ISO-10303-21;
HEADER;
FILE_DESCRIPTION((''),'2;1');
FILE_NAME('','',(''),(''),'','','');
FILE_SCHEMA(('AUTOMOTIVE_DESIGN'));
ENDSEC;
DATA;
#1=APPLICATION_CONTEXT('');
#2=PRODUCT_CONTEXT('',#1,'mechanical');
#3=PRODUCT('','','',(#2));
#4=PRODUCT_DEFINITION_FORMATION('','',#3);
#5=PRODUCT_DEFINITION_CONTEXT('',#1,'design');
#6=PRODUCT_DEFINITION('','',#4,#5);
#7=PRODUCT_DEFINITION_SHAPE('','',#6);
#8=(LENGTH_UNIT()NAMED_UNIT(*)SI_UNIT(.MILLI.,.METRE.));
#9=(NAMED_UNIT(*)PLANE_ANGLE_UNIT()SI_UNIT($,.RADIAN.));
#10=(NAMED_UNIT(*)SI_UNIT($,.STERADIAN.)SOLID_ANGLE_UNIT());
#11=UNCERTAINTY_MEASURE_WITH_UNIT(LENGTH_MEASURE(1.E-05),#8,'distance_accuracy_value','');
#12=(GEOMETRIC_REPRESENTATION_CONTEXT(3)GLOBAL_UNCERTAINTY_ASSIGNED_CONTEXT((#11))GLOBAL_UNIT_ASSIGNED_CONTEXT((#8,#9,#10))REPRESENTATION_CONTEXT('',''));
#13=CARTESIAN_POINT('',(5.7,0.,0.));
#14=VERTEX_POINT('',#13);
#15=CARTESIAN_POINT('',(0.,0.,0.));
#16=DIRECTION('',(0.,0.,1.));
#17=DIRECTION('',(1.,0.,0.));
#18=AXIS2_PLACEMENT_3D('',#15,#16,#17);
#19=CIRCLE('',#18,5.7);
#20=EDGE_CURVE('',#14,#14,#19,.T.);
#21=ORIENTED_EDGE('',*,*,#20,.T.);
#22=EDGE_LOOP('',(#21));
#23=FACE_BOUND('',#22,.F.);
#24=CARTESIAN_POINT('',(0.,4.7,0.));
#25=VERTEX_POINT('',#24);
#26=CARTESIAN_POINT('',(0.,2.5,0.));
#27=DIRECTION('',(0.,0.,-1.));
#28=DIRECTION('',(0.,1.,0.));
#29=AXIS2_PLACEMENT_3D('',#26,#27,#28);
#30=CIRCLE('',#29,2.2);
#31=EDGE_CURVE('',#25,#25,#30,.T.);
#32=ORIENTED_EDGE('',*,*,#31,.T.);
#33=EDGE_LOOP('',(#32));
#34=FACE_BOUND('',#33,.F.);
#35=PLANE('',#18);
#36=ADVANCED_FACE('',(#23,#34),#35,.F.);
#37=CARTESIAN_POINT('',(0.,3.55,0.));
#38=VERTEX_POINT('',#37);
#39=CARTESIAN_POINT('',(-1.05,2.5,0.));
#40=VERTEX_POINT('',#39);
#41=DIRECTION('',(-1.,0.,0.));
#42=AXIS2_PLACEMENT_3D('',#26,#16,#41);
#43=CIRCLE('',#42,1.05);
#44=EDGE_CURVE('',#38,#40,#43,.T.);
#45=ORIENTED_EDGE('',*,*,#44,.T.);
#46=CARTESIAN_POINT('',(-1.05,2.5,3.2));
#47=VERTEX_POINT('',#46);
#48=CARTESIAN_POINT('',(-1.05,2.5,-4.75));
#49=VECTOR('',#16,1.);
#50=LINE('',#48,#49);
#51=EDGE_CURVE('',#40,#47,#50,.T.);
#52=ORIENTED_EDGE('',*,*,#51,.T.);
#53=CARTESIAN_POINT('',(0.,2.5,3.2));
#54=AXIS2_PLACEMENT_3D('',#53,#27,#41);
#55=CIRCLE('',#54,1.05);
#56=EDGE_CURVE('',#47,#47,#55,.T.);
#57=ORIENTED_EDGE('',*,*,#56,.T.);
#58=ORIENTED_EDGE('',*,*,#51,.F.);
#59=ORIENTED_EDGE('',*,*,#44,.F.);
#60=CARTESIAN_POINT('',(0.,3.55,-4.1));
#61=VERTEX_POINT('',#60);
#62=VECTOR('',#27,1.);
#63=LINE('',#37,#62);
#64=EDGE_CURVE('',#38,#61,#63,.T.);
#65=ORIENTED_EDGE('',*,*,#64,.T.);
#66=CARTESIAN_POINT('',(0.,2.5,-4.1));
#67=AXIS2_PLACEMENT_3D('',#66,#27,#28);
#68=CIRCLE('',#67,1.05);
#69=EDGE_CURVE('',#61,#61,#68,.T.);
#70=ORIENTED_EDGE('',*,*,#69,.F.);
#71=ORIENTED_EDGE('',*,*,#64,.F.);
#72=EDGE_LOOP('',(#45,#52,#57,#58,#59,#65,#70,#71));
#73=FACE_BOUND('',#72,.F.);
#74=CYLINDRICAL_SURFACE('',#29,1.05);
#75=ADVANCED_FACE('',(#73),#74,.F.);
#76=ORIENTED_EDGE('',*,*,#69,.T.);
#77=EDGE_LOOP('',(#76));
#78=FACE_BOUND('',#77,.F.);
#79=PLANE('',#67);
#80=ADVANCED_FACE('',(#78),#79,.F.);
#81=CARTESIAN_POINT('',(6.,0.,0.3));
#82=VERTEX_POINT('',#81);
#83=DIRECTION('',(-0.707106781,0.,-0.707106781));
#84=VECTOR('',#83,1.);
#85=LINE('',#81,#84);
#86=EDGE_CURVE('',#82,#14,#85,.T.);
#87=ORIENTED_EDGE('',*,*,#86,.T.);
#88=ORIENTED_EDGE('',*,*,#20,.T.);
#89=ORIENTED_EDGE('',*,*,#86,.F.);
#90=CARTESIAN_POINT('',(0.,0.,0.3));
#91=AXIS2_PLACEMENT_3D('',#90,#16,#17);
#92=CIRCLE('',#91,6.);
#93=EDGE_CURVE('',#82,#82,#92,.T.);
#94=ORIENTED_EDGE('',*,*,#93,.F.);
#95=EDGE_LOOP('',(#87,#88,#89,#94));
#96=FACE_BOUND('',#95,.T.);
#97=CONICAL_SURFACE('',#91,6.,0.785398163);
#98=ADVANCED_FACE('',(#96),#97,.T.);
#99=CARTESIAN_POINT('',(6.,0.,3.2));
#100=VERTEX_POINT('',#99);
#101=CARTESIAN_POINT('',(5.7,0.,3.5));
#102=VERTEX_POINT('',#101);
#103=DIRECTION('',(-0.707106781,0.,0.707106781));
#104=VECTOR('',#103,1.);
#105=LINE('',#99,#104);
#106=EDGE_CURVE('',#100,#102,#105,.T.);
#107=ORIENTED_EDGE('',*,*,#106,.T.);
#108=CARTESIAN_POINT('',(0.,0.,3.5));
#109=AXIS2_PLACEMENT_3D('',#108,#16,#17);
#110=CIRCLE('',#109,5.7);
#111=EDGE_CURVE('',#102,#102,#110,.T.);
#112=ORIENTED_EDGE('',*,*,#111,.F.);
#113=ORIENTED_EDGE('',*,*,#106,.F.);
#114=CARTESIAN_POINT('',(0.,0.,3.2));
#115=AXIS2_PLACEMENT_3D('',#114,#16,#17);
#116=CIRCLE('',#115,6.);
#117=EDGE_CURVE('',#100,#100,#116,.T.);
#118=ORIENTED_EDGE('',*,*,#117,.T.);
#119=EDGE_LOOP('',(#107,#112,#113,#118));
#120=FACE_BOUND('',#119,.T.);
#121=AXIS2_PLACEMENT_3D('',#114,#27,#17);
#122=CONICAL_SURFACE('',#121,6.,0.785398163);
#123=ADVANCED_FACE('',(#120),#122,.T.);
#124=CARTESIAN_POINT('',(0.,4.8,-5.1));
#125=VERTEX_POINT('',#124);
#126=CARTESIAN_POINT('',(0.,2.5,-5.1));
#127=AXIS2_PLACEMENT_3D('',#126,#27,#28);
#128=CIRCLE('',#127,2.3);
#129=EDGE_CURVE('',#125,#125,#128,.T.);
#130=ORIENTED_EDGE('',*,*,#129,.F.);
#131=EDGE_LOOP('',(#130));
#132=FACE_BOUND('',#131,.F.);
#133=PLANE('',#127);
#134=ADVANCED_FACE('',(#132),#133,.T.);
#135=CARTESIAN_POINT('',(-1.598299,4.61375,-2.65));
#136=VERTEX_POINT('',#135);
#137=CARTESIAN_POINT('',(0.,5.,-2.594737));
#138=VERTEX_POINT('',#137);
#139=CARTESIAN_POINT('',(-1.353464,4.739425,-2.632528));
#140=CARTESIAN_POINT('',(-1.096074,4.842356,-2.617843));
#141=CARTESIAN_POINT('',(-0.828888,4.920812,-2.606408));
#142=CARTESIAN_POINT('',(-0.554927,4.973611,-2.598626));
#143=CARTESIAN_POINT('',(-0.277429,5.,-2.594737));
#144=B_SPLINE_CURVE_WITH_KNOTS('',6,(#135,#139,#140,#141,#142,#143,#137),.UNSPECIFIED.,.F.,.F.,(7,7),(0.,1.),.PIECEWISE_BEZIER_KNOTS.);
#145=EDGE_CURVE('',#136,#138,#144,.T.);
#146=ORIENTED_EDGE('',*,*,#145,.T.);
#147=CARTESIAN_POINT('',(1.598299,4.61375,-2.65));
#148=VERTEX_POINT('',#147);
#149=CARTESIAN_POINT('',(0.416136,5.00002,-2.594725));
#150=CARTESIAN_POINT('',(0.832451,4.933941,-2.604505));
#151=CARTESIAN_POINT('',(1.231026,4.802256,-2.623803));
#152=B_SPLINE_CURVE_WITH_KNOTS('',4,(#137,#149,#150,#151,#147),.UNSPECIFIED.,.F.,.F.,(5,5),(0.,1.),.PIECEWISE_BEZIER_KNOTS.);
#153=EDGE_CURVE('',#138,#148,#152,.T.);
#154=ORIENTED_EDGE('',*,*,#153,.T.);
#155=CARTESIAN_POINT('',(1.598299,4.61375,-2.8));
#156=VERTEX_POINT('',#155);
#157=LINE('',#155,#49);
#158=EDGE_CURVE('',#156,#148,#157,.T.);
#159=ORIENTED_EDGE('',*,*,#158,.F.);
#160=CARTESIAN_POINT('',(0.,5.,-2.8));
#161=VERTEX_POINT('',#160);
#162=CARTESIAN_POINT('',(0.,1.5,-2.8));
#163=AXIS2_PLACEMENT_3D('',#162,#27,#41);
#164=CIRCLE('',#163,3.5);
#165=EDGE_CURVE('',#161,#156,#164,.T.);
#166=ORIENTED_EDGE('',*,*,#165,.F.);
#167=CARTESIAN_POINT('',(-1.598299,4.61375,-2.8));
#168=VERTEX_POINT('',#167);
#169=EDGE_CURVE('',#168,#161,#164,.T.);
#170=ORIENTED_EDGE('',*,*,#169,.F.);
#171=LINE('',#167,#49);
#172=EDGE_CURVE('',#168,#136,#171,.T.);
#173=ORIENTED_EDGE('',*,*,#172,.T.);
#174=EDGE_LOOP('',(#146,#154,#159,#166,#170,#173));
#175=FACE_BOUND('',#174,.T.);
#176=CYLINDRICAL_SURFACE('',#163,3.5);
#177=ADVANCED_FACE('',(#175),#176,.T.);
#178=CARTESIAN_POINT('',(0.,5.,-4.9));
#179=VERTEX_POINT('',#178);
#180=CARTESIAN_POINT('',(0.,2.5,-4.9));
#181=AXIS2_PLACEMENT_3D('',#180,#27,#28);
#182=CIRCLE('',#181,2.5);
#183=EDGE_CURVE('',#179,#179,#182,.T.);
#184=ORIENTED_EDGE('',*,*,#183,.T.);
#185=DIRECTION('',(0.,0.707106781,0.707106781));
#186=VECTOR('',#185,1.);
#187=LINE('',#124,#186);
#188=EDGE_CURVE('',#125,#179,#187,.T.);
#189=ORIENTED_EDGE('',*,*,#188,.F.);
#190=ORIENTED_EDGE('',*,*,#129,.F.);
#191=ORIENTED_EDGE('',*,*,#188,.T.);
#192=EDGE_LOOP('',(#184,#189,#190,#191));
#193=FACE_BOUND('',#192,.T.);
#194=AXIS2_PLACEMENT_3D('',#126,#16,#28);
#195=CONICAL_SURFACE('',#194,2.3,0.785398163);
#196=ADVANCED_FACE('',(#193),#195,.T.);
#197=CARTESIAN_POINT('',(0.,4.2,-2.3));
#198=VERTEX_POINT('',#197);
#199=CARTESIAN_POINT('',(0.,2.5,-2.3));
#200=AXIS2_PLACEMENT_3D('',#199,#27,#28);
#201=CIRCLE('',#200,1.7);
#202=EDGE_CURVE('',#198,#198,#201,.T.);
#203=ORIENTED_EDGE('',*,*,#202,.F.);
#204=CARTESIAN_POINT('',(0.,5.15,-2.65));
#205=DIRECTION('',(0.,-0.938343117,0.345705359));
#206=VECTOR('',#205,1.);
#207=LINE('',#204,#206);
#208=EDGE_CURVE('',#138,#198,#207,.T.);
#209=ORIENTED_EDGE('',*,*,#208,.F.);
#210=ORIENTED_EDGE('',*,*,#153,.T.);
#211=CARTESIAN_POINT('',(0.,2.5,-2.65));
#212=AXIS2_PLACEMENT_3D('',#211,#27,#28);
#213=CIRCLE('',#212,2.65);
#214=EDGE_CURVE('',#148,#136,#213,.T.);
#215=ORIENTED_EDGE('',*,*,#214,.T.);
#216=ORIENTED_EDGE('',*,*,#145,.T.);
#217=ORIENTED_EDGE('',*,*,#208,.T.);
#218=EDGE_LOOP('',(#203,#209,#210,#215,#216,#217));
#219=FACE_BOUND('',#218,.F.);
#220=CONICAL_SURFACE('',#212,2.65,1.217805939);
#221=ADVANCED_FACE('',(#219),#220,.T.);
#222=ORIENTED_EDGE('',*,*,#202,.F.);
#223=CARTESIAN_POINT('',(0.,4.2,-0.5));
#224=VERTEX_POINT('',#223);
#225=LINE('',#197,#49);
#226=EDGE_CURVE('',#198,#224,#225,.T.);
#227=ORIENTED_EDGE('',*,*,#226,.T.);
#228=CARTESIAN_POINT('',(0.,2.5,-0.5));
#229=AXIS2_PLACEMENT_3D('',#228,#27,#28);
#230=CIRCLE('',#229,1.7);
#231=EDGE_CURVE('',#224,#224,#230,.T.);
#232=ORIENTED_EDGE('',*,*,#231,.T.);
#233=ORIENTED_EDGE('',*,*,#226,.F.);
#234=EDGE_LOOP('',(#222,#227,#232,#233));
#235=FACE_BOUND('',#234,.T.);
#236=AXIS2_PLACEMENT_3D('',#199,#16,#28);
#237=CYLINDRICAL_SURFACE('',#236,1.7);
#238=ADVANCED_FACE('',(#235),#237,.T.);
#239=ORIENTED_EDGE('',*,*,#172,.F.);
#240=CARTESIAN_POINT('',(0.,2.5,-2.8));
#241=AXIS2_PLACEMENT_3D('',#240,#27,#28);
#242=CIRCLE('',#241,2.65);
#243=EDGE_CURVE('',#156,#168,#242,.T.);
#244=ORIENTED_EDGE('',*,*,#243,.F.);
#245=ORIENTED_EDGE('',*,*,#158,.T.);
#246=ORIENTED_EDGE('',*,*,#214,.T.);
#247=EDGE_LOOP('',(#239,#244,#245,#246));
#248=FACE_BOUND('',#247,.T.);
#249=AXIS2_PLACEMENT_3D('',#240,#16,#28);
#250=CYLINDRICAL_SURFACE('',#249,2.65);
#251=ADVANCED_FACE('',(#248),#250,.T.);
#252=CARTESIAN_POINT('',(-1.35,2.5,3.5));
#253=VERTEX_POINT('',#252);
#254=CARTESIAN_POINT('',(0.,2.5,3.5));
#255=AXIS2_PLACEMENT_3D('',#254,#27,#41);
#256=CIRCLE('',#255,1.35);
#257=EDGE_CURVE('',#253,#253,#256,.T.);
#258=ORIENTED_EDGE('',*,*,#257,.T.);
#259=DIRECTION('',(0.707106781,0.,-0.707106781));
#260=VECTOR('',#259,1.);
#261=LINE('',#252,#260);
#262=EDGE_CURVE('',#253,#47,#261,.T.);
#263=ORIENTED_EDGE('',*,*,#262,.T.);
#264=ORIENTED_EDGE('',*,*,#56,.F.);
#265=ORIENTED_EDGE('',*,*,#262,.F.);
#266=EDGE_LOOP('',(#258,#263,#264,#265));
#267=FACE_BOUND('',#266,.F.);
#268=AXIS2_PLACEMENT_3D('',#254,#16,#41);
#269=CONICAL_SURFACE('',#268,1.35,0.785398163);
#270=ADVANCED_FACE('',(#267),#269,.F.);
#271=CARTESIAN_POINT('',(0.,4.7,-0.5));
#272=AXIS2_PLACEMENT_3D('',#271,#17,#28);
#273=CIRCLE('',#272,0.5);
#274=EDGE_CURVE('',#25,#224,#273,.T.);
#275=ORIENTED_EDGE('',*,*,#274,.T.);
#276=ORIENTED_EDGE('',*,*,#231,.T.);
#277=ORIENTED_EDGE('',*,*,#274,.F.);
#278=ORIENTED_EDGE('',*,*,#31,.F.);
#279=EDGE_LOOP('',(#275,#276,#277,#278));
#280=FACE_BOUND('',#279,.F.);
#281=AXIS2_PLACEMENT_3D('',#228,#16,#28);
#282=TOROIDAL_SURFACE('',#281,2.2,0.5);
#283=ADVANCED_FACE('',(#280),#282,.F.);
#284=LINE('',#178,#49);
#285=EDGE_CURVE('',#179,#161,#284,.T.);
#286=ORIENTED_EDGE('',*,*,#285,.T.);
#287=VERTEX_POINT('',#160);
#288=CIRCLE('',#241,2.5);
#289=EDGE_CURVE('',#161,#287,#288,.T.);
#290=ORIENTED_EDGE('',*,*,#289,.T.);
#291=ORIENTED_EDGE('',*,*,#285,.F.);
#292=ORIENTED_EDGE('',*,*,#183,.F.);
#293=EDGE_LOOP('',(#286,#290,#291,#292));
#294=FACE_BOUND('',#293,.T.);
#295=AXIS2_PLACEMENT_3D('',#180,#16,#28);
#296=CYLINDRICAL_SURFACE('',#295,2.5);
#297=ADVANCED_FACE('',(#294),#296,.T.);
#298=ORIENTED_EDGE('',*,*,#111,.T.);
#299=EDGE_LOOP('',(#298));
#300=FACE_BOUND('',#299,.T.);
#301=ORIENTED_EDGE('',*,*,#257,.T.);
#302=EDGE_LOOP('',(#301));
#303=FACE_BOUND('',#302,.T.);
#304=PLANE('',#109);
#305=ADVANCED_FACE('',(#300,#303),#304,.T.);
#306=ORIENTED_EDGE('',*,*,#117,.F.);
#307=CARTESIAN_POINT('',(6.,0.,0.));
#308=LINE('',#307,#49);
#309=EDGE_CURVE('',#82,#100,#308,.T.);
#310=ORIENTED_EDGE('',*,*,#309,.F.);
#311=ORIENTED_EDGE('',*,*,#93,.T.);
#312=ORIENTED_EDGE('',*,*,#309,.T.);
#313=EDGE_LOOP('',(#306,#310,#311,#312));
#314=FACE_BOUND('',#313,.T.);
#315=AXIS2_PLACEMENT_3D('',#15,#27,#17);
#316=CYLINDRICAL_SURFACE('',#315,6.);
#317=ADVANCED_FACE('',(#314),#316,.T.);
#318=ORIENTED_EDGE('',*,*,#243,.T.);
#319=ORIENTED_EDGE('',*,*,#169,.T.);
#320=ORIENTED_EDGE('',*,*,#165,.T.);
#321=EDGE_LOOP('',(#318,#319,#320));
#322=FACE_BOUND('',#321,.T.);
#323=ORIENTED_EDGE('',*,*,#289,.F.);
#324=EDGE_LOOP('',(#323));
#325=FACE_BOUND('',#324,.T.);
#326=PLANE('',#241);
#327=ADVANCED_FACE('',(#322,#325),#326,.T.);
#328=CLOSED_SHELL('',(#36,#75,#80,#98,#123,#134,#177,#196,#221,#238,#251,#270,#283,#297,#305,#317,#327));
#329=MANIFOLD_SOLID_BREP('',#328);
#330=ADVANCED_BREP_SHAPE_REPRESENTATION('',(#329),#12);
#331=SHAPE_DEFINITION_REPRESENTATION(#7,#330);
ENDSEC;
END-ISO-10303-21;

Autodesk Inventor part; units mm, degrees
ref_plane "YZ Plane" through (0, 0, 0) normal (1, 0, 0) x (0, 1, 0)
ref_plane "XZ Plane" through (0, 0, 0) normal (0, 1, 0) x (-1, 0, 0)
ref_plane "XY Plane" through (0, 0, 0) normal (0, 0, 1) x (1, 0, 0)
sketch "Sketch1" plane through (0, 0, 0) normal (0, 0, 1) x (1, 0, 0)
  circle A0 centre (0, 0) radius 6
  dimension "d0" = 12
extrude "Extrusion1" add sketch "Sketch1" along normal blind 3.5
sketch "Sketch2" plane through (0, 0, 3.5) normal (0, 0, 1) x (1, 0, 0)
  circle A0 centre (0, 2.5) radius 1.05
  line L0 (0, 2.5) -> (0, 0) construction
  dimension "d3" = 2.1
  dimension "d4" = 2.5
extrude "Extrusion2" add sketch "Sketch2" along normal blind 15 and the other way blind 8.25
chamfer "Chamfer1" distance 0.3 angle 45 2 edges at (-6, 0, 3.5) (-6, 0, 0)
sketch "Sketch4" plane through (0, 2.5, -4.75) normal (0, 0, -1) x (-1, 0, 0)
  circle A0 centre (0, 0) radius 1.05 projected
  point P0 (0, -2.5)
extrude "Extrusion4" cut sketch "Sketch4" against normal through all
sketch "Sketch5" plane through (0, 0, 0) normal (1, 0, 0) x (0, 1, 0)
  line L0 (3.55, 0) -> (1.45, 0) construction
  line L1 (2.5, 0) -> (2.5, -4.1) construction
  line L2 (2.5, -5.1) -> (4.8, -5.1)
  line L3 (4.8, -5.1) -> (5, -4.9)
  line L4 (5, -4.9) -> (5, -2.8)
  line L5 (5, -2.8) -> (5.15, -2.8)
  line L6 (5.15, -2.8) -> (5.15, -2.65)
  line L7 (5.15, -2.65) -> (4.2, -2.3)
  line L8 (4.2, -2.3) -> (4.2, 0)
  line L9 (4.2, 0) -> (3.55, 0)
  line L10 (3.55, 0) -> (3.55, -4.1)
  line L11 (3.55, -4.1) -> (2.5, -4.1)
  line L12 (2.5, -4.1) -> (2.5, -5.1)
  line L13 (3.55, 0) -> (2.5, 0) construction
  point P0 (0, 0)
  dimension "d17" = 2.3
  dimension "d18" = 135
  dimension "d19" = 0.2
  dimension "d20" = 2.5
  dimension "d21" = 0.15
  dimension "d22" = 0.15
  dimension "d23" = 2.3
  dimension "d24" = 1.7
  dimension "d25" = 2.8
  dimension "d26" = 1
revolve "Revolution1" add sketch "Sketch5" angle 360 about axis through (0, 2.5, 0) along (0, 0, -1)
fillet "Fillet1" radius 0.5 1 edges at (0, 0.8, 0)
chamfer "Chamfer2" distance 0.3 angle 45 1 edges at (1.05, 2.5, 3.5)
sketch "Sketch6" plane through (0, 2.5, -2.8) normal (0, 0, -1) x (-1, 0, 0)
  circle A0 centre (0, -1) radius 3.5
  circle A1 centre (0, 0) radius 2.5 projected
  circle A2 centre (0, 0) radius 2.65 projected
  line L0 (0, 0) -> (0, -1) construction
  point P0 (0, -2.5)
  point P1 (1.5983, 2.1137)
  point P2 (-1.5983, 2.1137)
  dimension "d32" = 1
extrude "Extrusion5" cut sketch "Sketch6" against normal blind 1 contours A0 A2 picked at (0.1892, 2.5795)
properties part number "TestCam"
